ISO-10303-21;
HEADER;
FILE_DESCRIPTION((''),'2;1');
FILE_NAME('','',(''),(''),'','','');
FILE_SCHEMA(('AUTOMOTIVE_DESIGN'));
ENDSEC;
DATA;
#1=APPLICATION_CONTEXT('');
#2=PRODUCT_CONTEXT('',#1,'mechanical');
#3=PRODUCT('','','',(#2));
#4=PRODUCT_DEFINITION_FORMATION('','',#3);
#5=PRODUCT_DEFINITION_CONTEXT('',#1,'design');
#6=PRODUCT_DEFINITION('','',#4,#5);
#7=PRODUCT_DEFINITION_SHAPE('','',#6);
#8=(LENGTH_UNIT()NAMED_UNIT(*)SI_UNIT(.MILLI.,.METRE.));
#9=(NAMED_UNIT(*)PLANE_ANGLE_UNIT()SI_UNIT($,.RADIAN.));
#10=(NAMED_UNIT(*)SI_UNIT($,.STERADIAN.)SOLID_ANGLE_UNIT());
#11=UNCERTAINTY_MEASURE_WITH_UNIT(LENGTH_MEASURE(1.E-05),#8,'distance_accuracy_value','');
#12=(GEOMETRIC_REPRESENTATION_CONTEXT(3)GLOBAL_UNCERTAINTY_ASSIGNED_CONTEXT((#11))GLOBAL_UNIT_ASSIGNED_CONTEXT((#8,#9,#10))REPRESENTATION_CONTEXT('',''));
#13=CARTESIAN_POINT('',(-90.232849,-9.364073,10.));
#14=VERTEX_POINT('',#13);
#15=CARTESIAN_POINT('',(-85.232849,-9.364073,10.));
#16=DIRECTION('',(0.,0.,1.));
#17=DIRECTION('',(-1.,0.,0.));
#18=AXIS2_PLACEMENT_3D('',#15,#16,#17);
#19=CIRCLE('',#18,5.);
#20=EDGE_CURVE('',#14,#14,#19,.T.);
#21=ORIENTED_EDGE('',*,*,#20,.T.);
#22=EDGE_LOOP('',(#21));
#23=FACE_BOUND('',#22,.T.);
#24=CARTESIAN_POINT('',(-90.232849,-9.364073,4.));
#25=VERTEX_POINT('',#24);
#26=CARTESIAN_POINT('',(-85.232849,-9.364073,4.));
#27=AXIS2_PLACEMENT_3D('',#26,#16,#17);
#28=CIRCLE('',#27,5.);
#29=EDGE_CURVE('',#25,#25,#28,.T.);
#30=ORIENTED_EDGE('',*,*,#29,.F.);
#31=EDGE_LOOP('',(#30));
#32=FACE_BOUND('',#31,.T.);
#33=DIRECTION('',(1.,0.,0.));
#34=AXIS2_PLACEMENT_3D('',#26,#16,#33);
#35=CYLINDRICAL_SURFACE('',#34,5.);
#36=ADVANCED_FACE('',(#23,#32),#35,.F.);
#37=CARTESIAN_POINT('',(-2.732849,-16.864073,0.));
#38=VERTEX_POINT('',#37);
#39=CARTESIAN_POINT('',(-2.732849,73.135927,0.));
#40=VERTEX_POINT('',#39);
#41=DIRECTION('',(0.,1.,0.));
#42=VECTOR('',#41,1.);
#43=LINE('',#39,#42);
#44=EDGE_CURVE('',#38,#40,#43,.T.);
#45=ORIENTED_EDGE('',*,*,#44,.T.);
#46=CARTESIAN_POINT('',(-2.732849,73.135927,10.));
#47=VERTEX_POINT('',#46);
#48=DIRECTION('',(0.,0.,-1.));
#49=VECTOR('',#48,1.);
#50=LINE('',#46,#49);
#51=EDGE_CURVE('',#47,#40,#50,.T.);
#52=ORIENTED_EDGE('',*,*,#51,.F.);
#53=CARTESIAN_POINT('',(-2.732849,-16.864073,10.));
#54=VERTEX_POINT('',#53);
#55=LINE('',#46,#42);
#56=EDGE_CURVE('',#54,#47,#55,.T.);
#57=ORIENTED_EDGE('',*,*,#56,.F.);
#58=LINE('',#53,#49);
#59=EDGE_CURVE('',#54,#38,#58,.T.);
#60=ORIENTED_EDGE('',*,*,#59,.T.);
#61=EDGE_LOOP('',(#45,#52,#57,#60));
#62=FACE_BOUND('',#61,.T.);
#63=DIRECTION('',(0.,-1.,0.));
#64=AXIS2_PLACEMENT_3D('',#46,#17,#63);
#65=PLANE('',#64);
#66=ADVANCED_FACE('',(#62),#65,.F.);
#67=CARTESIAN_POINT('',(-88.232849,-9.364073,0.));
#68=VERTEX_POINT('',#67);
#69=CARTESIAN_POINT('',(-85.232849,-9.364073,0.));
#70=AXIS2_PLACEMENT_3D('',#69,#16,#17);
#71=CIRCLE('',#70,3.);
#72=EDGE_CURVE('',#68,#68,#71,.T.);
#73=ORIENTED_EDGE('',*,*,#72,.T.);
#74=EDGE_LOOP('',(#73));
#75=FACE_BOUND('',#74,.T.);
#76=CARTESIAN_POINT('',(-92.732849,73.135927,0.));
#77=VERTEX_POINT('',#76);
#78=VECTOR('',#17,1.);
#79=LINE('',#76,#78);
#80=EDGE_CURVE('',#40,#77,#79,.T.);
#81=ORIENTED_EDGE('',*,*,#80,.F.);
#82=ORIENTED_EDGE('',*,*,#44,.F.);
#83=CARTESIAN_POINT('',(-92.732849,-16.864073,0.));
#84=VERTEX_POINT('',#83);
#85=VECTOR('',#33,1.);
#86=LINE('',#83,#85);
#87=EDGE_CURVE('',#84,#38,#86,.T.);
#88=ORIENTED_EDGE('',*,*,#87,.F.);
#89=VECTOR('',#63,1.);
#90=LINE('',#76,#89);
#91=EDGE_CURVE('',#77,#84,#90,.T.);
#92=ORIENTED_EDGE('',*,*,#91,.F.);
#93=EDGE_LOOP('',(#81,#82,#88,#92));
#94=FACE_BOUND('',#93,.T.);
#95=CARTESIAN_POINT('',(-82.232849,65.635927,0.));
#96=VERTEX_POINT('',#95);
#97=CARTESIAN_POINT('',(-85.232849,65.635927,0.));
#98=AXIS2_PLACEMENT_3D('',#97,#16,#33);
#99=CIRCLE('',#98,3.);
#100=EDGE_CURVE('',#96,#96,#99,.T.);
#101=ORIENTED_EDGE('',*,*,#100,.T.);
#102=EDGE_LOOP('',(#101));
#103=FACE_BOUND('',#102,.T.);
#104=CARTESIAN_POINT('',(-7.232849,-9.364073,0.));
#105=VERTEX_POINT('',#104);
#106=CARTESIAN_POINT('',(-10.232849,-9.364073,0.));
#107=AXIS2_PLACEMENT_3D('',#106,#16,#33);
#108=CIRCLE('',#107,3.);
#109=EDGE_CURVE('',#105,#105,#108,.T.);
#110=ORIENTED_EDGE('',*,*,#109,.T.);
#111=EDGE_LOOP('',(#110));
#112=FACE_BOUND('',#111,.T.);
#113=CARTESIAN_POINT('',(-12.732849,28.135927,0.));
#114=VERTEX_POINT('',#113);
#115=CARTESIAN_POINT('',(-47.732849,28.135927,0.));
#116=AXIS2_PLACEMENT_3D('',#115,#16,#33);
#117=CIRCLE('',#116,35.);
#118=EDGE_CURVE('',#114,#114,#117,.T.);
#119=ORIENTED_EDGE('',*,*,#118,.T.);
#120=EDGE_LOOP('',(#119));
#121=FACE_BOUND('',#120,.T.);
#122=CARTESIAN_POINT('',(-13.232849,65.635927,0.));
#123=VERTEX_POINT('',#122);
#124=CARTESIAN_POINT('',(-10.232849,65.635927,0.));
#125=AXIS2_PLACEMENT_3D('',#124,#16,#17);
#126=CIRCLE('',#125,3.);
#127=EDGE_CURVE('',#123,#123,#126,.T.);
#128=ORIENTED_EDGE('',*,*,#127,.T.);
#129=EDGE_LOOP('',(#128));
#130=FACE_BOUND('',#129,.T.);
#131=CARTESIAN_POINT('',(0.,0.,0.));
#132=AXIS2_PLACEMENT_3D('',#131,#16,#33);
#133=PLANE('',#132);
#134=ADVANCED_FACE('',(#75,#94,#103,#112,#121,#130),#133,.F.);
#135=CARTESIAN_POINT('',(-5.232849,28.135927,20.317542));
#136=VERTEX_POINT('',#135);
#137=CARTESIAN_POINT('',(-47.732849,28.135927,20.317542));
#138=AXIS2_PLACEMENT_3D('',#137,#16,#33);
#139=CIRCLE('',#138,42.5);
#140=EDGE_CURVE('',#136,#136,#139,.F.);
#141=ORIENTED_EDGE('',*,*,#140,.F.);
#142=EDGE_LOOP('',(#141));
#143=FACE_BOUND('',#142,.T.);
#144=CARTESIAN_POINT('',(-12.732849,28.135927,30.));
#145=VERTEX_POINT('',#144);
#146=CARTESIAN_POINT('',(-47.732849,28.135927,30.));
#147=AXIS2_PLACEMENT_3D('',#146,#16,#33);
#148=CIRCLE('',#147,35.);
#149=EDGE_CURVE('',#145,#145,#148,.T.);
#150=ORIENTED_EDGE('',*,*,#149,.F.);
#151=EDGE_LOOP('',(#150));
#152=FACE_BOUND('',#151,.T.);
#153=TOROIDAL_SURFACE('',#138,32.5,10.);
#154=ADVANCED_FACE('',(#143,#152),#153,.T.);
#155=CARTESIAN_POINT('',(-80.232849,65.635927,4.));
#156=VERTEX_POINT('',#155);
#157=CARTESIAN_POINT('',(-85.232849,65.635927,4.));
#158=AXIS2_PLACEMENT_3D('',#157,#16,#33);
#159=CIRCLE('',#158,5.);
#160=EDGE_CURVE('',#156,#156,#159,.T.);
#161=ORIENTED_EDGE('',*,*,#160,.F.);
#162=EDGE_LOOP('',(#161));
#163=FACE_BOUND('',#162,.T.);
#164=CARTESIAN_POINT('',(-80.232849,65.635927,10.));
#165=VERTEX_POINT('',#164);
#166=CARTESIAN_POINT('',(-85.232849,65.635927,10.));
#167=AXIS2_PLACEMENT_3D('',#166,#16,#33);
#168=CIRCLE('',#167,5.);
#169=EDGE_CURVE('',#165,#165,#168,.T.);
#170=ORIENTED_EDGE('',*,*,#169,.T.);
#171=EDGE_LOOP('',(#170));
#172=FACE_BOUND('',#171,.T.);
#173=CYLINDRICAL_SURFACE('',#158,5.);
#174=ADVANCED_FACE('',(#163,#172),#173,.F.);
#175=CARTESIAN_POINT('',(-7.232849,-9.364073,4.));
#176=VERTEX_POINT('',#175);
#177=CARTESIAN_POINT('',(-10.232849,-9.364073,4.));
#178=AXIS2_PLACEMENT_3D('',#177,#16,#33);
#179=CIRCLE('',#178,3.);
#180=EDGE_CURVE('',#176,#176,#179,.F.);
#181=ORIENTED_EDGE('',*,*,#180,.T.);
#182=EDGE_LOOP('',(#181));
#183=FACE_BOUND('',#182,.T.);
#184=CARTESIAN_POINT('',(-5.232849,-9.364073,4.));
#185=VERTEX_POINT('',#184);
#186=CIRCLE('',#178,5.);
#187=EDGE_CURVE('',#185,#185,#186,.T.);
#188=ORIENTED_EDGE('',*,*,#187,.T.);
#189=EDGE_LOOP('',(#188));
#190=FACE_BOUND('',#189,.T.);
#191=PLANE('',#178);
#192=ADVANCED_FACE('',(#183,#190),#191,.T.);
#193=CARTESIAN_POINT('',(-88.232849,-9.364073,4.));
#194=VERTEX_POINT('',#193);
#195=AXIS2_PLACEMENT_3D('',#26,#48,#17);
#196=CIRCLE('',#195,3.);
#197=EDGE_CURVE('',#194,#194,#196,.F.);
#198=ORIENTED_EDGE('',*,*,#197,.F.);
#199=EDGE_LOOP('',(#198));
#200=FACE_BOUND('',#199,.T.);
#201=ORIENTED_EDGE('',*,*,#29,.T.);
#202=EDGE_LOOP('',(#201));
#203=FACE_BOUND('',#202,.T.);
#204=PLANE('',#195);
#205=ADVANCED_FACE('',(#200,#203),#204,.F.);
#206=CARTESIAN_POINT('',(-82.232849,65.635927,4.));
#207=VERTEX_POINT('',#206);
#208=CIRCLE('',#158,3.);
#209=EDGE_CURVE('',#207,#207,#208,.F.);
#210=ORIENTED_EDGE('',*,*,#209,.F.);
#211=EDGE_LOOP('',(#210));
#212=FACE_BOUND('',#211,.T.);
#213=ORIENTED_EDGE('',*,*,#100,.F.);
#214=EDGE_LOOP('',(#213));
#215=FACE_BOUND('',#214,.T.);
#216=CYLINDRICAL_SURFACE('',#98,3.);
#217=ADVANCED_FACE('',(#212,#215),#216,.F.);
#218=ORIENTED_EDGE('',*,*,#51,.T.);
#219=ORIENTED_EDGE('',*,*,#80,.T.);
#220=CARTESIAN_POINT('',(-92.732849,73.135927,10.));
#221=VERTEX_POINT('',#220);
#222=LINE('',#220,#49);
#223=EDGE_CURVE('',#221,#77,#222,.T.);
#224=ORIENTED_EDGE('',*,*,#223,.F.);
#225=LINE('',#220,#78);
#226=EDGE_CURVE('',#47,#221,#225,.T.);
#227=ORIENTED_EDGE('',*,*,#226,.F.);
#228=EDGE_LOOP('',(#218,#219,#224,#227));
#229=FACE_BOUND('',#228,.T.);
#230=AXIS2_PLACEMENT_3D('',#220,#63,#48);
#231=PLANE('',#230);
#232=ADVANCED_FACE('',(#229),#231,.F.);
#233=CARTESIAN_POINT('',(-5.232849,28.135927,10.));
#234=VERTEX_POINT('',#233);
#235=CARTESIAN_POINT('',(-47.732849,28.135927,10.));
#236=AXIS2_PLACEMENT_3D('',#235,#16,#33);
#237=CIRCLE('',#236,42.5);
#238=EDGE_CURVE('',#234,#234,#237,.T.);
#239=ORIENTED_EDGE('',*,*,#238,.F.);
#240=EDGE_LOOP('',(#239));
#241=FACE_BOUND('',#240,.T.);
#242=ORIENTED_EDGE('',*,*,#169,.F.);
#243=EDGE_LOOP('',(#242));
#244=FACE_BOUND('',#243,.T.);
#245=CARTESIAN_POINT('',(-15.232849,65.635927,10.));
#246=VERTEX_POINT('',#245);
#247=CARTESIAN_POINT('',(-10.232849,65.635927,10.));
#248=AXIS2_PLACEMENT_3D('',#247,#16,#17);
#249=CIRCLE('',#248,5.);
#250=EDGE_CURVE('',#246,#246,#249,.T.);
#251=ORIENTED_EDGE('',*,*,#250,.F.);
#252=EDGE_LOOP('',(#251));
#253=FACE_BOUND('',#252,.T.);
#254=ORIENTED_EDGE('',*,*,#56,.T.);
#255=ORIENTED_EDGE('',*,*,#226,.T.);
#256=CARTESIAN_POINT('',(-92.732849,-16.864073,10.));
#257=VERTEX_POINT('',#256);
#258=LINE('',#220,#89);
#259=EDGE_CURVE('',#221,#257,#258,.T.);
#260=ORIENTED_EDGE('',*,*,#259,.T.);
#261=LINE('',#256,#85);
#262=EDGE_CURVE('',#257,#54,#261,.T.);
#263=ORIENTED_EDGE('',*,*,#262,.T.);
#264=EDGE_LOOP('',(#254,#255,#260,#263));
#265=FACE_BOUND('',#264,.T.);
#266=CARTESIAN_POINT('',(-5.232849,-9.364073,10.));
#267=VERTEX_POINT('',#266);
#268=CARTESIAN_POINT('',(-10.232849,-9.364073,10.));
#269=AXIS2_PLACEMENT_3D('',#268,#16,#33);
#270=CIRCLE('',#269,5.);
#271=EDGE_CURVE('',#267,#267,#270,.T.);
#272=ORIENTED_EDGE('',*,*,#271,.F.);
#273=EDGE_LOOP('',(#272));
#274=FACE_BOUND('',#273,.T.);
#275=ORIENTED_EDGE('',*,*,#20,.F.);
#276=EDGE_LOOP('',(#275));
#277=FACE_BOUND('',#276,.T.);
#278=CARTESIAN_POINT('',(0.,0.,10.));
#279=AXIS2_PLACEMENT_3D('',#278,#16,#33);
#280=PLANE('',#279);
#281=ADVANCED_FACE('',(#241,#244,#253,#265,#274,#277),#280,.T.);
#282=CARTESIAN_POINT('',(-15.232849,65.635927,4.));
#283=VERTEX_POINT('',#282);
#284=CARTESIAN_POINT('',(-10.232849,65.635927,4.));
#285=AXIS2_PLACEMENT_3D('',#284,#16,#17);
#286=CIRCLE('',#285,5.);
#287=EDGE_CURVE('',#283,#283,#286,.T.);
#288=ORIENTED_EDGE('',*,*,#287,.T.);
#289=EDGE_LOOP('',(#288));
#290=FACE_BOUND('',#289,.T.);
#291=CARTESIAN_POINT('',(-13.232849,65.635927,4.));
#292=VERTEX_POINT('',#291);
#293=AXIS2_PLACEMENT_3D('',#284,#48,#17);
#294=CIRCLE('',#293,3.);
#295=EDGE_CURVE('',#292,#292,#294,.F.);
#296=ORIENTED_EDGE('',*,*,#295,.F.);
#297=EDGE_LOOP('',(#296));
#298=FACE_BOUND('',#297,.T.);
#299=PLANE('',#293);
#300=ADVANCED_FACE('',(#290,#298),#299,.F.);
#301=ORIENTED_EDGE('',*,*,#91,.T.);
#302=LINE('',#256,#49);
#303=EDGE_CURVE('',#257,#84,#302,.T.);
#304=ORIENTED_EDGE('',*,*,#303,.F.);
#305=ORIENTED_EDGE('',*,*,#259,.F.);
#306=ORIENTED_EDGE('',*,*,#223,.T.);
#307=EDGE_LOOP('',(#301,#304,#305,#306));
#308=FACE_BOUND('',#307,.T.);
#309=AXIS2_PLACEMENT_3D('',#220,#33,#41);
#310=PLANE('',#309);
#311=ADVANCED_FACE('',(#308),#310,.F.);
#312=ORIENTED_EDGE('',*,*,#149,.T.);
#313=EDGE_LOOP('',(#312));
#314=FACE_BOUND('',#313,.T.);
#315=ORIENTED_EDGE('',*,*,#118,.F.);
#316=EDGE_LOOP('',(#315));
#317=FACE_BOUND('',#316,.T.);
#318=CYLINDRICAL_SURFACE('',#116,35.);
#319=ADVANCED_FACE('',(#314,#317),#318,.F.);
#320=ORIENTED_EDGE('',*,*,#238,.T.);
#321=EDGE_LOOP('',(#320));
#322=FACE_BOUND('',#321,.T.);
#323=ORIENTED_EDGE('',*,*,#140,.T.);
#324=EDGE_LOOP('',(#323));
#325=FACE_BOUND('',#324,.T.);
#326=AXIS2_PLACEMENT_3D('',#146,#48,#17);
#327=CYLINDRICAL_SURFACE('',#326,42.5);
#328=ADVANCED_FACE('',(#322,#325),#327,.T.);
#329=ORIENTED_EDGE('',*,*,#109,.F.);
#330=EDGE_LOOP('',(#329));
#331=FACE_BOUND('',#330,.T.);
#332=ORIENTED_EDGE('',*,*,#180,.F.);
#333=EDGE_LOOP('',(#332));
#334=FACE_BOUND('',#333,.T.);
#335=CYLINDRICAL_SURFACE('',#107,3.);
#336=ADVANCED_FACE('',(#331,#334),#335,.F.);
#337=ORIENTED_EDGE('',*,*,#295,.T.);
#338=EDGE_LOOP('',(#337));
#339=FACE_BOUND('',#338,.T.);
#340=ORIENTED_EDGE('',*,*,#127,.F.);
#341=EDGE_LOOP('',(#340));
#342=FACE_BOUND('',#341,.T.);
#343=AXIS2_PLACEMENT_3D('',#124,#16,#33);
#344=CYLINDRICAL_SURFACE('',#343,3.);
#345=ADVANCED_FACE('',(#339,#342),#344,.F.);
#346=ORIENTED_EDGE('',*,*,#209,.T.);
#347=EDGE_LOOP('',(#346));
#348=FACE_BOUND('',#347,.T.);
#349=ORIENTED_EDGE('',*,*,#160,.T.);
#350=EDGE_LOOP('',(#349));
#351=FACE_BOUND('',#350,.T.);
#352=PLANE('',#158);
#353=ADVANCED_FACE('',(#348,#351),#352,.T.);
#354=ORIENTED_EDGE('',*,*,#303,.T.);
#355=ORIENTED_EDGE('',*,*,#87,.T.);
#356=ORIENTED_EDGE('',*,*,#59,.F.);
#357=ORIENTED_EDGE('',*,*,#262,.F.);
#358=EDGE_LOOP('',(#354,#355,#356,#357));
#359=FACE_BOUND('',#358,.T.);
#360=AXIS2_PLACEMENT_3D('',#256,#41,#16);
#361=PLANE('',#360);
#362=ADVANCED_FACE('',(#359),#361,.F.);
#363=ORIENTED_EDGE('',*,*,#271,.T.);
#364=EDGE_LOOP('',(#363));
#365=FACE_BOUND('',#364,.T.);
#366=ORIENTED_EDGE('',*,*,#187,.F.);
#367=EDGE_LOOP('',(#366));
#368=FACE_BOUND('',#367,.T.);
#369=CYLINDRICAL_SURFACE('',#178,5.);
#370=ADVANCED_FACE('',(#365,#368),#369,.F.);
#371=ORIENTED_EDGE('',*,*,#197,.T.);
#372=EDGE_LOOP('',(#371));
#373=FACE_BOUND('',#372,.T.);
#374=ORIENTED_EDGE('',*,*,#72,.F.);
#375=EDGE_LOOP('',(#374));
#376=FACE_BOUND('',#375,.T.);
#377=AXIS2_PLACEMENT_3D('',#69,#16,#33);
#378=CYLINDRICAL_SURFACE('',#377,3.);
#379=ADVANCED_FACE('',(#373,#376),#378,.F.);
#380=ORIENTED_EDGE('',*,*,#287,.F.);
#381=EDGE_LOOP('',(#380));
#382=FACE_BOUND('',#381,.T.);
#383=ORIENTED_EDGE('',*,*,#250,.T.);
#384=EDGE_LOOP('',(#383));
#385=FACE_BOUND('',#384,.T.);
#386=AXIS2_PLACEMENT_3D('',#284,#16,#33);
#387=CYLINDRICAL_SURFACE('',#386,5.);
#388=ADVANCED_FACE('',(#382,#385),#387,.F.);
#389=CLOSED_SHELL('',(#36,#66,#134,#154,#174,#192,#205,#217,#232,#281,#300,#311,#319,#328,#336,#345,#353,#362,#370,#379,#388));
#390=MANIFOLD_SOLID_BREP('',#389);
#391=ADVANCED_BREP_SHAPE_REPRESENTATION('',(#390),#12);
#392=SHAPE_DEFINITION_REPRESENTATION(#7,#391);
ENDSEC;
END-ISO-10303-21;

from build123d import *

# Parameters (mm, degrees)
SKETCH_1_W          = 90
SKETCH_1_H          = 90
EXTRUDE_3_DEPTH     = 10
SKETCH_3_R          = 35
CUT_EXTRUDE_2_DEPTH = 10
EXTRUDE_START       = 20
SKETCH_4_R          = 42.5
SKETCH_4_R_2        = 35
EXTRUDE_4_DEPTH     = 20
FILLET_1_R          = 10
SKETCH_5_R          = 3
CUT_EXTRUDE_3_DEPTH = 10
SKETCH_6_R          = 5
CUT_EXTRUDE_4_DEPTH = 6


with BuildPart() as part:
    # 스케치1 → 보스-돌출3 (new body)
    with BuildSketch(Plane.XY):
        with Locations((-47.732849402, 28.135926797)):
            Rectangle(SKETCH_1_W, SKETCH_1_H)
    extrude(amount=EXTRUDE_3_DEPTH)

    # 스케치3 → 컷-돌출2 (cut)
    with BuildSketch(Plane.XY.offset(10)):
        with Locations((-47.732849402, 28.135926797)):
            Circle(SKETCH_3_R)
    extrude(amount=-CUT_EXTRUDE_2_DEPTH, mode=Mode.SUBTRACT)

    # 스케치4 → 보스-돌출4 (add)
    with BuildSketch(Plane.XY.offset(10).offset(EXTRUDE_START)):
        with Locations((-47.732849402, 28.135926797)):
            Circle(SKETCH_4_R)
        with Locations((-47.732849402, 28.135926797)):
            Circle(SKETCH_4_R_2, mode=Mode.SUBTRACT)
    extrude(amount=-EXTRUDE_4_DEPTH)

    # 필렛1
    # the kernel refuses this fillet: 10 mm, written as the material it takes off along each edge
    with BuildSketch(Plane(origin=(-47.732849402, 28.135926797, 30), x_dir=(1, 0, 0), z_dir=(0, -1, 0))) as fillet_1_piece_1:
        with BuildLine():
            CenterArc((32.5, -9.682458366), FILLET_1_R, 0, 75.522487814)
            Line((35, 0), (35.05, 0.193649167))
            ThreePointArc((35.05, 0.193649167), (38.75, 0.2), (42.5, 0.2))
            Line((42.5, 0.2), (42.7, 0))
            Line((42.7, 0), (42.7, -9.682458366))
            Line((42.7, -9.682458366), (42.5, -9.682458366))
        make_face()
    revolve(axis=Axis((-47.732849402, 28.135926797, 30), (0, 0, 1)), mode=Mode.SUBTRACT)

    # 스케치5 → 컷-돌출3 (cut)
    with BuildSketch(Plane.XY.offset(10)):
        with Locations((-85.232849402, 65.635926797)):
            Circle(SKETCH_5_R)
        with Locations(Location((-10.232849402, 65.635926797, 0), (0, 0, 180))):
            Circle(SKETCH_5_R)
        with Locations((-10.232849402, -9.364073203)):
            Circle(SKETCH_5_R)
        with Locations(Location((-85.232849402, -9.364073203, 0), (0, 0, 180))):
            Circle(SKETCH_5_R)
    extrude(amount=-CUT_EXTRUDE_3_DEPTH, mode=Mode.SUBTRACT)

    # 스케치6 → 컷-돌출4 (cut)
    with BuildSketch(Plane.XY.offset(10)):
        with Locations((-85.232849402, 65.635926797)):
            Circle(SKETCH_6_R)
        with Locations(Location((-10.232849402, 65.635926797, 0), (0, 0, 180))):
            Circle(SKETCH_6_R)
        with Locations((-10.232849402, -9.364073203)):
            Circle(SKETCH_6_R)
        with Locations(Location((-85.232849402, -9.364073203, 0), (0, 0, 180))):
            Circle(SKETCH_6_R)
    extrude(amount=-CUT_EXTRUDE_4_DEPTH, mode=Mode.SUBTRACT)


solid = part.part
